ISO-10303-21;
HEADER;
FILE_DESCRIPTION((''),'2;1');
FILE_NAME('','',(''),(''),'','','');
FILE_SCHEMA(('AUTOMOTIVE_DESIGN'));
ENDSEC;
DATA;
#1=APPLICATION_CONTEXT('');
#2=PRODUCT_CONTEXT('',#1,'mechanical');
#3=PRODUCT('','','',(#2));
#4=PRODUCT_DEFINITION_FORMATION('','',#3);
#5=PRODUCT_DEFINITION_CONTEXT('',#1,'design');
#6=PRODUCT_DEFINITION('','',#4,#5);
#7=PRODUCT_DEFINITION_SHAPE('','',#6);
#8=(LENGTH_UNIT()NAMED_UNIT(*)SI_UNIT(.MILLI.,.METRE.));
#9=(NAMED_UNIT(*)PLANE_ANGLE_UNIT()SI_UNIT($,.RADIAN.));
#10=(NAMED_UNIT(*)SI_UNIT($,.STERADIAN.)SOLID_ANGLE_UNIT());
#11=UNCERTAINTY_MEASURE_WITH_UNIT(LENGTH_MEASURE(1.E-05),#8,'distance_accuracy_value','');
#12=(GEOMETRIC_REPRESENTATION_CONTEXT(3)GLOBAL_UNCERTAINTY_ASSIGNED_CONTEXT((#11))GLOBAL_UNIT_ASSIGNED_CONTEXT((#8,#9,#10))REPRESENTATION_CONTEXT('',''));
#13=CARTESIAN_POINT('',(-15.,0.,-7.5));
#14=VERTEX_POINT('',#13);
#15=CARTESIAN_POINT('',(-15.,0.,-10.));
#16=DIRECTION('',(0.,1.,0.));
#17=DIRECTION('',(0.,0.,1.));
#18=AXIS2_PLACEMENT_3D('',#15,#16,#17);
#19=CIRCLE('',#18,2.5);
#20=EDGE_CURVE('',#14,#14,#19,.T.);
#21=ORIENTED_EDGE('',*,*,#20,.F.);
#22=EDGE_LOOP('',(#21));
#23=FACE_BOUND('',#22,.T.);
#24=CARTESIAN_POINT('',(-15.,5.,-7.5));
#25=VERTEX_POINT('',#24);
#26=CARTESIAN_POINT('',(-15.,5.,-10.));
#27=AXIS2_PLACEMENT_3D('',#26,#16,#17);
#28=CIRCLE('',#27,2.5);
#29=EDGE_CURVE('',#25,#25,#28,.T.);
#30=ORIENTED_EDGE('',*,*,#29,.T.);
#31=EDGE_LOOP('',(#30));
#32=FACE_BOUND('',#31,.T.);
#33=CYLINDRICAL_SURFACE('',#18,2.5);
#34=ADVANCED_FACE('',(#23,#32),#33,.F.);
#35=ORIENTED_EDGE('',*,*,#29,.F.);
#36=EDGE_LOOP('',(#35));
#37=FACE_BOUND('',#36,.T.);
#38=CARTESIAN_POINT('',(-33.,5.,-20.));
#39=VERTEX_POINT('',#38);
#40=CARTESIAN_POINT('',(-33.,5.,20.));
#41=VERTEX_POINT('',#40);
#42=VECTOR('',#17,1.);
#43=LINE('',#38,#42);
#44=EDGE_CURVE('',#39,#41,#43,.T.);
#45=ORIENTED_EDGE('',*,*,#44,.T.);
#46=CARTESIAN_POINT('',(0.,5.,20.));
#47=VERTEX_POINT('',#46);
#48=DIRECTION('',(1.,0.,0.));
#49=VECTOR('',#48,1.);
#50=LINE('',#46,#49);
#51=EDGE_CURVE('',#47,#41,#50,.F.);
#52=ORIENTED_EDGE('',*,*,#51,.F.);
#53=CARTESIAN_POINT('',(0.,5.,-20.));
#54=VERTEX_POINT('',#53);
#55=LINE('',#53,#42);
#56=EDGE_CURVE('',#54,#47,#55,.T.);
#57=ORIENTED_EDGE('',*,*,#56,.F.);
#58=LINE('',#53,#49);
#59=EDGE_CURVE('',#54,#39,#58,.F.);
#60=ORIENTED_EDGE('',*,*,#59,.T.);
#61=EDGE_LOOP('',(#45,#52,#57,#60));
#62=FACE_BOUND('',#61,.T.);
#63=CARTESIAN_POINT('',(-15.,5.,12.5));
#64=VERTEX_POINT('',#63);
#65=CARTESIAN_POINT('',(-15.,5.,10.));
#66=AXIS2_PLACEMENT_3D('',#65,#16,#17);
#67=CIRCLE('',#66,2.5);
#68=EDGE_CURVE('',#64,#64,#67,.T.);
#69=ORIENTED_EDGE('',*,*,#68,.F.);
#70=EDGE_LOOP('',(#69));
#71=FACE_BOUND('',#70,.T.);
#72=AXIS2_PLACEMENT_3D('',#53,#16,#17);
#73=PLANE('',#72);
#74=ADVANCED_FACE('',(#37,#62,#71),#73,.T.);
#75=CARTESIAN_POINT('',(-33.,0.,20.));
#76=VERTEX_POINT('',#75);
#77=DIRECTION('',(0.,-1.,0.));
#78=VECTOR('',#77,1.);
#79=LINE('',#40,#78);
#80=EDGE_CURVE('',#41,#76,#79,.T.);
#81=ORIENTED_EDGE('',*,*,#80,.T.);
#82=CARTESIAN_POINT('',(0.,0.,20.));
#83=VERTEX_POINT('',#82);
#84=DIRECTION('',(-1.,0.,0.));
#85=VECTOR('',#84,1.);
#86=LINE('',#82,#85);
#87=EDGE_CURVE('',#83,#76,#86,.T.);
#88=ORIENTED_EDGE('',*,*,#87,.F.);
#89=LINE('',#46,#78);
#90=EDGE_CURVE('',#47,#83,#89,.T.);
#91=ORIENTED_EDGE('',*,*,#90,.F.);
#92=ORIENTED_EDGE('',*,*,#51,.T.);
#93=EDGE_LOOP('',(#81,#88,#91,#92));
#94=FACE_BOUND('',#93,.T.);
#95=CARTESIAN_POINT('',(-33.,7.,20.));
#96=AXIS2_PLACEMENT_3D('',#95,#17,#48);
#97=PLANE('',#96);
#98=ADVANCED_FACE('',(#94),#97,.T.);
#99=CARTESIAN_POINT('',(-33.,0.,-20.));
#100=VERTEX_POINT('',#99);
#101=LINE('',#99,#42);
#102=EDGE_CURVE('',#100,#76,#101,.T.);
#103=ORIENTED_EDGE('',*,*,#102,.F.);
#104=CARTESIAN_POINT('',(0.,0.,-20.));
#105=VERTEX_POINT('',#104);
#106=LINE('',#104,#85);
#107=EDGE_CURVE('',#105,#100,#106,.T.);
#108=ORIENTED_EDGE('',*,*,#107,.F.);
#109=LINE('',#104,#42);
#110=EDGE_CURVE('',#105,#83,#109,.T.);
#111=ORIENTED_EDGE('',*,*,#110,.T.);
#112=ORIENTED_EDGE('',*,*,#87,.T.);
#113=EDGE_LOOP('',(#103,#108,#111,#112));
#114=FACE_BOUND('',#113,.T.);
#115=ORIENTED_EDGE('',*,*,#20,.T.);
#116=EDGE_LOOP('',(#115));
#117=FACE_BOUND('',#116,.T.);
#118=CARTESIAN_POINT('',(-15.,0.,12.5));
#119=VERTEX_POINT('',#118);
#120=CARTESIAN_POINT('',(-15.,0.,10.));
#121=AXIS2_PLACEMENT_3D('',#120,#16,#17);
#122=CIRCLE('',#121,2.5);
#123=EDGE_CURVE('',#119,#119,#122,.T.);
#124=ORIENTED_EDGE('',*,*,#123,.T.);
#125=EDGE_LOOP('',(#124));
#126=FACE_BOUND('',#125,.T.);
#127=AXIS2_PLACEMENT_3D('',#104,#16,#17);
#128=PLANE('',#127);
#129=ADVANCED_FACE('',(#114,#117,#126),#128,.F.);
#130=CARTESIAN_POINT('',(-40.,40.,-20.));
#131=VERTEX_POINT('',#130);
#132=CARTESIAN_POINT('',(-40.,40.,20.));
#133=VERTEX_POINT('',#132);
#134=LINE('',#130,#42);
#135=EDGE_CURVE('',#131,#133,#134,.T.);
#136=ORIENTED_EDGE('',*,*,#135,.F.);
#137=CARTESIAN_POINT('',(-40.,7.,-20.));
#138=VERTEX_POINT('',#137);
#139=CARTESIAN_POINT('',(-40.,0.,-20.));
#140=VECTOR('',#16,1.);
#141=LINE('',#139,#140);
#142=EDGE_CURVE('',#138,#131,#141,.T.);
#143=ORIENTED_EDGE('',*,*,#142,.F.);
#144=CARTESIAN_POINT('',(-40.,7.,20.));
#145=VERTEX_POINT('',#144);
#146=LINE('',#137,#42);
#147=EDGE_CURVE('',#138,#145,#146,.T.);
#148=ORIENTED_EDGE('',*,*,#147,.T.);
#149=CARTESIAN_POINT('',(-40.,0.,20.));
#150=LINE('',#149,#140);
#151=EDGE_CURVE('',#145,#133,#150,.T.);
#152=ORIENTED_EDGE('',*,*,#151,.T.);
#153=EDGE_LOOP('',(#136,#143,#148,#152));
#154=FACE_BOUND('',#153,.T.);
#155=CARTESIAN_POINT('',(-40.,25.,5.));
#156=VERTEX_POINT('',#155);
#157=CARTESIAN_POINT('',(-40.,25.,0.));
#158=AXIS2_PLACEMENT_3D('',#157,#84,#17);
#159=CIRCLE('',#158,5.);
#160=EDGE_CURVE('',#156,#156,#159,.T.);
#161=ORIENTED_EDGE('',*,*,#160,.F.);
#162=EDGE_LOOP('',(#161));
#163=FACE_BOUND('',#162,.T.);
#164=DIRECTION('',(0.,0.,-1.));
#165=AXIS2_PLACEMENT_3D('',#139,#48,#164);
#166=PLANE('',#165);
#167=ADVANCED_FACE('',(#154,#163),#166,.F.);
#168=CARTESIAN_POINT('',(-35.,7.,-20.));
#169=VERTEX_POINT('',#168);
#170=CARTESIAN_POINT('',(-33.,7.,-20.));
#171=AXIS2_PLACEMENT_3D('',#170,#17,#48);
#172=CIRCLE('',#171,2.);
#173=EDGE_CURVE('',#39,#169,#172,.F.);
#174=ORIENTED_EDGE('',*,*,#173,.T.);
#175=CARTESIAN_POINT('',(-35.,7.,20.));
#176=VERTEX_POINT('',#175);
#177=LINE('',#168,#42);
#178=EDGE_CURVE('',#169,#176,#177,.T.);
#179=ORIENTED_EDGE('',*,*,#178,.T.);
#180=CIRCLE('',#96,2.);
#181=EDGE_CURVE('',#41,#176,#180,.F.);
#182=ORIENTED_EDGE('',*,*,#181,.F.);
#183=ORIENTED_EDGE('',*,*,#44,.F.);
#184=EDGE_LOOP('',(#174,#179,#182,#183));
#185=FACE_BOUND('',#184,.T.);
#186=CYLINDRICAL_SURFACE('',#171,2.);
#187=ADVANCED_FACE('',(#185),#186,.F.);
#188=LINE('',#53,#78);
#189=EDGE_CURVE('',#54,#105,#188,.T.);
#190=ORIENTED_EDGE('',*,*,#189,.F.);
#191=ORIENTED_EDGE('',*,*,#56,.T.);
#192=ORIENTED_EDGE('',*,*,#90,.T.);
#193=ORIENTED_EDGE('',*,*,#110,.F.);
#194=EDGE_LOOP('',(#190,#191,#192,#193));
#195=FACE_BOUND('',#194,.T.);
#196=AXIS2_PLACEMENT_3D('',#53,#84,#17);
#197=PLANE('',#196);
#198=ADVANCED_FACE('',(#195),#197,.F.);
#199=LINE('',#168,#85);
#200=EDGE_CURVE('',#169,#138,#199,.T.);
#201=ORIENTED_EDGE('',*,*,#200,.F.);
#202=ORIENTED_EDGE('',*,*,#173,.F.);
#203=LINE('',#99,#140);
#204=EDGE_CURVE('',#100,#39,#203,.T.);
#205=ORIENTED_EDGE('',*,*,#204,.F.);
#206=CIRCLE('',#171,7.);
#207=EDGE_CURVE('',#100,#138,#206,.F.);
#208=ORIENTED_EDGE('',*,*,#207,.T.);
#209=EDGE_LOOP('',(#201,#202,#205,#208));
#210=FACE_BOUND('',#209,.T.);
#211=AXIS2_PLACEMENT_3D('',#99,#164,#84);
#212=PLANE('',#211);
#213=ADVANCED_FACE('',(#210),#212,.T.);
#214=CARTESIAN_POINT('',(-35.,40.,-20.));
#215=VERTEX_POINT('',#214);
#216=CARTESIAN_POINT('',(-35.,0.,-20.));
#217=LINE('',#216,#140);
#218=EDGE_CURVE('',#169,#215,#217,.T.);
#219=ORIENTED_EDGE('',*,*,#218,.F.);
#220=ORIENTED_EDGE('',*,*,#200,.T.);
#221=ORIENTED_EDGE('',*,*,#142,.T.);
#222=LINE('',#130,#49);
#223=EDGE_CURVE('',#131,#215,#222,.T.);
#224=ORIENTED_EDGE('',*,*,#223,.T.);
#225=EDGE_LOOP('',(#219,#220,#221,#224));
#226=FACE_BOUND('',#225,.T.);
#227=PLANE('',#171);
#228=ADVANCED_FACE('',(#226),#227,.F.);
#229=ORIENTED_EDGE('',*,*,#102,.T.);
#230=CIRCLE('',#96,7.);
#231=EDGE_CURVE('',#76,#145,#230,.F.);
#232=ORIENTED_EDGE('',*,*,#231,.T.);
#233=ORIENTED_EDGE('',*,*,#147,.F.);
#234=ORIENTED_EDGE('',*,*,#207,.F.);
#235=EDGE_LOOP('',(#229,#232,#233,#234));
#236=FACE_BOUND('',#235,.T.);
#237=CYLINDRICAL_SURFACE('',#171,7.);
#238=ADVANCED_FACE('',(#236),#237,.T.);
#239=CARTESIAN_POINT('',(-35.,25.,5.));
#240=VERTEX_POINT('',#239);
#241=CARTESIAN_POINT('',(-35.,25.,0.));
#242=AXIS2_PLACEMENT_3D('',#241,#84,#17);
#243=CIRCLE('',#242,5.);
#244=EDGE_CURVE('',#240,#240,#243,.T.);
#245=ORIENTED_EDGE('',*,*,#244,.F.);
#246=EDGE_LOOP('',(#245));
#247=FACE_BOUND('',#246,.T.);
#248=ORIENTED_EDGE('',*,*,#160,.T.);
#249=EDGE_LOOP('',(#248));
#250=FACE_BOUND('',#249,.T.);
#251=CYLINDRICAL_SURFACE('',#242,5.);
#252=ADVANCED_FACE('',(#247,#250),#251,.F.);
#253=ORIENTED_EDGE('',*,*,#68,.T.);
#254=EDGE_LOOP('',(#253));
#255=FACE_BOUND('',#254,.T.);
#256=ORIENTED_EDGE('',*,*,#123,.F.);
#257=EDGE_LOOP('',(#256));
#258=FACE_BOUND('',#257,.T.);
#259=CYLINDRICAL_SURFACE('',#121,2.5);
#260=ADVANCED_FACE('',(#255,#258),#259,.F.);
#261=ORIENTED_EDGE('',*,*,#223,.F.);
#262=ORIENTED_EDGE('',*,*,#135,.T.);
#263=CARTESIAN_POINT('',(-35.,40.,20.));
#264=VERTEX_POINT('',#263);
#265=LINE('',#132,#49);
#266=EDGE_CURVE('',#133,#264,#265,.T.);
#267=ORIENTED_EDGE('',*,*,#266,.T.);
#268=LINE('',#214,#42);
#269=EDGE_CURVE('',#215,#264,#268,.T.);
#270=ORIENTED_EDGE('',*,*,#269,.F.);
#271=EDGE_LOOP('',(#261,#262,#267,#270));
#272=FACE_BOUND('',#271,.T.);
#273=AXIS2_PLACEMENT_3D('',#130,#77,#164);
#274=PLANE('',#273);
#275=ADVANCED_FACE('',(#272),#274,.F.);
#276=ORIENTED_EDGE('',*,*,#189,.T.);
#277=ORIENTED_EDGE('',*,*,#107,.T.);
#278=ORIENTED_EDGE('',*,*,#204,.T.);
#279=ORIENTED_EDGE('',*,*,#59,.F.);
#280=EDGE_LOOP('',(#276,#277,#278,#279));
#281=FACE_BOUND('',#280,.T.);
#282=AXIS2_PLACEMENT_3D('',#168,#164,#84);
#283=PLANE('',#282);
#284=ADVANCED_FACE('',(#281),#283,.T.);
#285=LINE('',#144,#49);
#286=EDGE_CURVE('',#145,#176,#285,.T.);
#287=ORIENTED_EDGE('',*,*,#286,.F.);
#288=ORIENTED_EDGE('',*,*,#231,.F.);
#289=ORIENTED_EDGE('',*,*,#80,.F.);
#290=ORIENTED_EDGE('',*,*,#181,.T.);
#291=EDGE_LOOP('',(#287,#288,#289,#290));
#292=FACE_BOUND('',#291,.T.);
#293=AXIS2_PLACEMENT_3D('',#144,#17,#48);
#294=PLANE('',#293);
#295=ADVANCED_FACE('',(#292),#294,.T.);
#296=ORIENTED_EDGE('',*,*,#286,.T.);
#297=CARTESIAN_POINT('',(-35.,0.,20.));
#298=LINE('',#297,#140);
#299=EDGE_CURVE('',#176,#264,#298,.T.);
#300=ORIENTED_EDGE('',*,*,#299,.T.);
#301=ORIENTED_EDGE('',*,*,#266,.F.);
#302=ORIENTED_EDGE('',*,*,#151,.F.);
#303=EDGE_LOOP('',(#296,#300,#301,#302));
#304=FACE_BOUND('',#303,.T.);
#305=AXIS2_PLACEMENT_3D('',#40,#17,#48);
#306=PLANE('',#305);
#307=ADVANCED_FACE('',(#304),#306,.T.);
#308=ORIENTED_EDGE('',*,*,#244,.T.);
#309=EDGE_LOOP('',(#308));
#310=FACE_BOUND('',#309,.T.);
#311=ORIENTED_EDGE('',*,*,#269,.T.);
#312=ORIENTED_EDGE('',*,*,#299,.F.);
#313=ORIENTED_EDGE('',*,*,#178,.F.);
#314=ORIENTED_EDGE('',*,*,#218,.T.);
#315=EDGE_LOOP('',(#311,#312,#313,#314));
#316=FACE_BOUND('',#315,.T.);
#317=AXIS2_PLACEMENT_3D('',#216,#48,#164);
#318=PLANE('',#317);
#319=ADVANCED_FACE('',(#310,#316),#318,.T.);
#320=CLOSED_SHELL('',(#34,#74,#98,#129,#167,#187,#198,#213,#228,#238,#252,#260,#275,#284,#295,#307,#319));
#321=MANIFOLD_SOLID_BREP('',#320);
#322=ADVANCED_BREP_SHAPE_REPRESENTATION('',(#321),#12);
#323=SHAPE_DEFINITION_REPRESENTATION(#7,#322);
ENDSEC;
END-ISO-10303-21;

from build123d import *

# Parameters (mm, degrees)
BASE_FLANGE1_DEPTH = 20
SKETCH6_R          = 5
CUT_EXTRUDE1_DEPTH = 10
SKETCH7_R          = 2.5
CUT_EXTRUDE2_DEPTH = 5


# Sheet-metal steps are written as plain solids
with BuildPart() as part:
    # Sketch1 → Base-Flange1 (new, symmetric)
    with BuildSketch(Plane.XY):
        with BuildLine():
            Line((0, 0), (-33, 0))
            ThreePointArc((-33, 0), (-37.949747468, 2.050252532), (-40, 7))
            Line((-40, 7), (-40, 40))
            Line((-40, 40), (-35, 40))
            Line((-35, 40), (-35, 7))
            ThreePointArc((-35, 7), (-34.414213562, 5.585786438), (-33, 5))
            Line((-33, 5), (0, 5))
            Line((0, 5), (0, 0))
        make_face()
    extrude(amount=BASE_FLANGE1_DEPTH, both=True)

    # Sketch6 → Cut-Extrude1 (cut)
    with BuildSketch(Plane.ZY.offset(40)):
        with Locations((0, 25)):
            Circle(SKETCH6_R)
    extrude(amount=-CUT_EXTRUDE1_DEPTH, mode=Mode.SUBTRACT)

    # Sketch7 → Cut-Extrude2 (cut)
    with BuildSketch(Plane(origin=(0, 5, 0), x_dir=(1, 0, 0), z_dir=(0, 1, 0))):
        with Locations(Location((-15, 10, 0), (0, 0, 270))):
            Circle(SKETCH7_R)
        with Locations(Location((-15, -10, 0), (0, 0, 270))):
            Circle(SKETCH7_R)
    extrude(amount=-CUT_EXTRUDE2_DEPTH, mode=Mode.SUBTRACT)


solid = part.part
